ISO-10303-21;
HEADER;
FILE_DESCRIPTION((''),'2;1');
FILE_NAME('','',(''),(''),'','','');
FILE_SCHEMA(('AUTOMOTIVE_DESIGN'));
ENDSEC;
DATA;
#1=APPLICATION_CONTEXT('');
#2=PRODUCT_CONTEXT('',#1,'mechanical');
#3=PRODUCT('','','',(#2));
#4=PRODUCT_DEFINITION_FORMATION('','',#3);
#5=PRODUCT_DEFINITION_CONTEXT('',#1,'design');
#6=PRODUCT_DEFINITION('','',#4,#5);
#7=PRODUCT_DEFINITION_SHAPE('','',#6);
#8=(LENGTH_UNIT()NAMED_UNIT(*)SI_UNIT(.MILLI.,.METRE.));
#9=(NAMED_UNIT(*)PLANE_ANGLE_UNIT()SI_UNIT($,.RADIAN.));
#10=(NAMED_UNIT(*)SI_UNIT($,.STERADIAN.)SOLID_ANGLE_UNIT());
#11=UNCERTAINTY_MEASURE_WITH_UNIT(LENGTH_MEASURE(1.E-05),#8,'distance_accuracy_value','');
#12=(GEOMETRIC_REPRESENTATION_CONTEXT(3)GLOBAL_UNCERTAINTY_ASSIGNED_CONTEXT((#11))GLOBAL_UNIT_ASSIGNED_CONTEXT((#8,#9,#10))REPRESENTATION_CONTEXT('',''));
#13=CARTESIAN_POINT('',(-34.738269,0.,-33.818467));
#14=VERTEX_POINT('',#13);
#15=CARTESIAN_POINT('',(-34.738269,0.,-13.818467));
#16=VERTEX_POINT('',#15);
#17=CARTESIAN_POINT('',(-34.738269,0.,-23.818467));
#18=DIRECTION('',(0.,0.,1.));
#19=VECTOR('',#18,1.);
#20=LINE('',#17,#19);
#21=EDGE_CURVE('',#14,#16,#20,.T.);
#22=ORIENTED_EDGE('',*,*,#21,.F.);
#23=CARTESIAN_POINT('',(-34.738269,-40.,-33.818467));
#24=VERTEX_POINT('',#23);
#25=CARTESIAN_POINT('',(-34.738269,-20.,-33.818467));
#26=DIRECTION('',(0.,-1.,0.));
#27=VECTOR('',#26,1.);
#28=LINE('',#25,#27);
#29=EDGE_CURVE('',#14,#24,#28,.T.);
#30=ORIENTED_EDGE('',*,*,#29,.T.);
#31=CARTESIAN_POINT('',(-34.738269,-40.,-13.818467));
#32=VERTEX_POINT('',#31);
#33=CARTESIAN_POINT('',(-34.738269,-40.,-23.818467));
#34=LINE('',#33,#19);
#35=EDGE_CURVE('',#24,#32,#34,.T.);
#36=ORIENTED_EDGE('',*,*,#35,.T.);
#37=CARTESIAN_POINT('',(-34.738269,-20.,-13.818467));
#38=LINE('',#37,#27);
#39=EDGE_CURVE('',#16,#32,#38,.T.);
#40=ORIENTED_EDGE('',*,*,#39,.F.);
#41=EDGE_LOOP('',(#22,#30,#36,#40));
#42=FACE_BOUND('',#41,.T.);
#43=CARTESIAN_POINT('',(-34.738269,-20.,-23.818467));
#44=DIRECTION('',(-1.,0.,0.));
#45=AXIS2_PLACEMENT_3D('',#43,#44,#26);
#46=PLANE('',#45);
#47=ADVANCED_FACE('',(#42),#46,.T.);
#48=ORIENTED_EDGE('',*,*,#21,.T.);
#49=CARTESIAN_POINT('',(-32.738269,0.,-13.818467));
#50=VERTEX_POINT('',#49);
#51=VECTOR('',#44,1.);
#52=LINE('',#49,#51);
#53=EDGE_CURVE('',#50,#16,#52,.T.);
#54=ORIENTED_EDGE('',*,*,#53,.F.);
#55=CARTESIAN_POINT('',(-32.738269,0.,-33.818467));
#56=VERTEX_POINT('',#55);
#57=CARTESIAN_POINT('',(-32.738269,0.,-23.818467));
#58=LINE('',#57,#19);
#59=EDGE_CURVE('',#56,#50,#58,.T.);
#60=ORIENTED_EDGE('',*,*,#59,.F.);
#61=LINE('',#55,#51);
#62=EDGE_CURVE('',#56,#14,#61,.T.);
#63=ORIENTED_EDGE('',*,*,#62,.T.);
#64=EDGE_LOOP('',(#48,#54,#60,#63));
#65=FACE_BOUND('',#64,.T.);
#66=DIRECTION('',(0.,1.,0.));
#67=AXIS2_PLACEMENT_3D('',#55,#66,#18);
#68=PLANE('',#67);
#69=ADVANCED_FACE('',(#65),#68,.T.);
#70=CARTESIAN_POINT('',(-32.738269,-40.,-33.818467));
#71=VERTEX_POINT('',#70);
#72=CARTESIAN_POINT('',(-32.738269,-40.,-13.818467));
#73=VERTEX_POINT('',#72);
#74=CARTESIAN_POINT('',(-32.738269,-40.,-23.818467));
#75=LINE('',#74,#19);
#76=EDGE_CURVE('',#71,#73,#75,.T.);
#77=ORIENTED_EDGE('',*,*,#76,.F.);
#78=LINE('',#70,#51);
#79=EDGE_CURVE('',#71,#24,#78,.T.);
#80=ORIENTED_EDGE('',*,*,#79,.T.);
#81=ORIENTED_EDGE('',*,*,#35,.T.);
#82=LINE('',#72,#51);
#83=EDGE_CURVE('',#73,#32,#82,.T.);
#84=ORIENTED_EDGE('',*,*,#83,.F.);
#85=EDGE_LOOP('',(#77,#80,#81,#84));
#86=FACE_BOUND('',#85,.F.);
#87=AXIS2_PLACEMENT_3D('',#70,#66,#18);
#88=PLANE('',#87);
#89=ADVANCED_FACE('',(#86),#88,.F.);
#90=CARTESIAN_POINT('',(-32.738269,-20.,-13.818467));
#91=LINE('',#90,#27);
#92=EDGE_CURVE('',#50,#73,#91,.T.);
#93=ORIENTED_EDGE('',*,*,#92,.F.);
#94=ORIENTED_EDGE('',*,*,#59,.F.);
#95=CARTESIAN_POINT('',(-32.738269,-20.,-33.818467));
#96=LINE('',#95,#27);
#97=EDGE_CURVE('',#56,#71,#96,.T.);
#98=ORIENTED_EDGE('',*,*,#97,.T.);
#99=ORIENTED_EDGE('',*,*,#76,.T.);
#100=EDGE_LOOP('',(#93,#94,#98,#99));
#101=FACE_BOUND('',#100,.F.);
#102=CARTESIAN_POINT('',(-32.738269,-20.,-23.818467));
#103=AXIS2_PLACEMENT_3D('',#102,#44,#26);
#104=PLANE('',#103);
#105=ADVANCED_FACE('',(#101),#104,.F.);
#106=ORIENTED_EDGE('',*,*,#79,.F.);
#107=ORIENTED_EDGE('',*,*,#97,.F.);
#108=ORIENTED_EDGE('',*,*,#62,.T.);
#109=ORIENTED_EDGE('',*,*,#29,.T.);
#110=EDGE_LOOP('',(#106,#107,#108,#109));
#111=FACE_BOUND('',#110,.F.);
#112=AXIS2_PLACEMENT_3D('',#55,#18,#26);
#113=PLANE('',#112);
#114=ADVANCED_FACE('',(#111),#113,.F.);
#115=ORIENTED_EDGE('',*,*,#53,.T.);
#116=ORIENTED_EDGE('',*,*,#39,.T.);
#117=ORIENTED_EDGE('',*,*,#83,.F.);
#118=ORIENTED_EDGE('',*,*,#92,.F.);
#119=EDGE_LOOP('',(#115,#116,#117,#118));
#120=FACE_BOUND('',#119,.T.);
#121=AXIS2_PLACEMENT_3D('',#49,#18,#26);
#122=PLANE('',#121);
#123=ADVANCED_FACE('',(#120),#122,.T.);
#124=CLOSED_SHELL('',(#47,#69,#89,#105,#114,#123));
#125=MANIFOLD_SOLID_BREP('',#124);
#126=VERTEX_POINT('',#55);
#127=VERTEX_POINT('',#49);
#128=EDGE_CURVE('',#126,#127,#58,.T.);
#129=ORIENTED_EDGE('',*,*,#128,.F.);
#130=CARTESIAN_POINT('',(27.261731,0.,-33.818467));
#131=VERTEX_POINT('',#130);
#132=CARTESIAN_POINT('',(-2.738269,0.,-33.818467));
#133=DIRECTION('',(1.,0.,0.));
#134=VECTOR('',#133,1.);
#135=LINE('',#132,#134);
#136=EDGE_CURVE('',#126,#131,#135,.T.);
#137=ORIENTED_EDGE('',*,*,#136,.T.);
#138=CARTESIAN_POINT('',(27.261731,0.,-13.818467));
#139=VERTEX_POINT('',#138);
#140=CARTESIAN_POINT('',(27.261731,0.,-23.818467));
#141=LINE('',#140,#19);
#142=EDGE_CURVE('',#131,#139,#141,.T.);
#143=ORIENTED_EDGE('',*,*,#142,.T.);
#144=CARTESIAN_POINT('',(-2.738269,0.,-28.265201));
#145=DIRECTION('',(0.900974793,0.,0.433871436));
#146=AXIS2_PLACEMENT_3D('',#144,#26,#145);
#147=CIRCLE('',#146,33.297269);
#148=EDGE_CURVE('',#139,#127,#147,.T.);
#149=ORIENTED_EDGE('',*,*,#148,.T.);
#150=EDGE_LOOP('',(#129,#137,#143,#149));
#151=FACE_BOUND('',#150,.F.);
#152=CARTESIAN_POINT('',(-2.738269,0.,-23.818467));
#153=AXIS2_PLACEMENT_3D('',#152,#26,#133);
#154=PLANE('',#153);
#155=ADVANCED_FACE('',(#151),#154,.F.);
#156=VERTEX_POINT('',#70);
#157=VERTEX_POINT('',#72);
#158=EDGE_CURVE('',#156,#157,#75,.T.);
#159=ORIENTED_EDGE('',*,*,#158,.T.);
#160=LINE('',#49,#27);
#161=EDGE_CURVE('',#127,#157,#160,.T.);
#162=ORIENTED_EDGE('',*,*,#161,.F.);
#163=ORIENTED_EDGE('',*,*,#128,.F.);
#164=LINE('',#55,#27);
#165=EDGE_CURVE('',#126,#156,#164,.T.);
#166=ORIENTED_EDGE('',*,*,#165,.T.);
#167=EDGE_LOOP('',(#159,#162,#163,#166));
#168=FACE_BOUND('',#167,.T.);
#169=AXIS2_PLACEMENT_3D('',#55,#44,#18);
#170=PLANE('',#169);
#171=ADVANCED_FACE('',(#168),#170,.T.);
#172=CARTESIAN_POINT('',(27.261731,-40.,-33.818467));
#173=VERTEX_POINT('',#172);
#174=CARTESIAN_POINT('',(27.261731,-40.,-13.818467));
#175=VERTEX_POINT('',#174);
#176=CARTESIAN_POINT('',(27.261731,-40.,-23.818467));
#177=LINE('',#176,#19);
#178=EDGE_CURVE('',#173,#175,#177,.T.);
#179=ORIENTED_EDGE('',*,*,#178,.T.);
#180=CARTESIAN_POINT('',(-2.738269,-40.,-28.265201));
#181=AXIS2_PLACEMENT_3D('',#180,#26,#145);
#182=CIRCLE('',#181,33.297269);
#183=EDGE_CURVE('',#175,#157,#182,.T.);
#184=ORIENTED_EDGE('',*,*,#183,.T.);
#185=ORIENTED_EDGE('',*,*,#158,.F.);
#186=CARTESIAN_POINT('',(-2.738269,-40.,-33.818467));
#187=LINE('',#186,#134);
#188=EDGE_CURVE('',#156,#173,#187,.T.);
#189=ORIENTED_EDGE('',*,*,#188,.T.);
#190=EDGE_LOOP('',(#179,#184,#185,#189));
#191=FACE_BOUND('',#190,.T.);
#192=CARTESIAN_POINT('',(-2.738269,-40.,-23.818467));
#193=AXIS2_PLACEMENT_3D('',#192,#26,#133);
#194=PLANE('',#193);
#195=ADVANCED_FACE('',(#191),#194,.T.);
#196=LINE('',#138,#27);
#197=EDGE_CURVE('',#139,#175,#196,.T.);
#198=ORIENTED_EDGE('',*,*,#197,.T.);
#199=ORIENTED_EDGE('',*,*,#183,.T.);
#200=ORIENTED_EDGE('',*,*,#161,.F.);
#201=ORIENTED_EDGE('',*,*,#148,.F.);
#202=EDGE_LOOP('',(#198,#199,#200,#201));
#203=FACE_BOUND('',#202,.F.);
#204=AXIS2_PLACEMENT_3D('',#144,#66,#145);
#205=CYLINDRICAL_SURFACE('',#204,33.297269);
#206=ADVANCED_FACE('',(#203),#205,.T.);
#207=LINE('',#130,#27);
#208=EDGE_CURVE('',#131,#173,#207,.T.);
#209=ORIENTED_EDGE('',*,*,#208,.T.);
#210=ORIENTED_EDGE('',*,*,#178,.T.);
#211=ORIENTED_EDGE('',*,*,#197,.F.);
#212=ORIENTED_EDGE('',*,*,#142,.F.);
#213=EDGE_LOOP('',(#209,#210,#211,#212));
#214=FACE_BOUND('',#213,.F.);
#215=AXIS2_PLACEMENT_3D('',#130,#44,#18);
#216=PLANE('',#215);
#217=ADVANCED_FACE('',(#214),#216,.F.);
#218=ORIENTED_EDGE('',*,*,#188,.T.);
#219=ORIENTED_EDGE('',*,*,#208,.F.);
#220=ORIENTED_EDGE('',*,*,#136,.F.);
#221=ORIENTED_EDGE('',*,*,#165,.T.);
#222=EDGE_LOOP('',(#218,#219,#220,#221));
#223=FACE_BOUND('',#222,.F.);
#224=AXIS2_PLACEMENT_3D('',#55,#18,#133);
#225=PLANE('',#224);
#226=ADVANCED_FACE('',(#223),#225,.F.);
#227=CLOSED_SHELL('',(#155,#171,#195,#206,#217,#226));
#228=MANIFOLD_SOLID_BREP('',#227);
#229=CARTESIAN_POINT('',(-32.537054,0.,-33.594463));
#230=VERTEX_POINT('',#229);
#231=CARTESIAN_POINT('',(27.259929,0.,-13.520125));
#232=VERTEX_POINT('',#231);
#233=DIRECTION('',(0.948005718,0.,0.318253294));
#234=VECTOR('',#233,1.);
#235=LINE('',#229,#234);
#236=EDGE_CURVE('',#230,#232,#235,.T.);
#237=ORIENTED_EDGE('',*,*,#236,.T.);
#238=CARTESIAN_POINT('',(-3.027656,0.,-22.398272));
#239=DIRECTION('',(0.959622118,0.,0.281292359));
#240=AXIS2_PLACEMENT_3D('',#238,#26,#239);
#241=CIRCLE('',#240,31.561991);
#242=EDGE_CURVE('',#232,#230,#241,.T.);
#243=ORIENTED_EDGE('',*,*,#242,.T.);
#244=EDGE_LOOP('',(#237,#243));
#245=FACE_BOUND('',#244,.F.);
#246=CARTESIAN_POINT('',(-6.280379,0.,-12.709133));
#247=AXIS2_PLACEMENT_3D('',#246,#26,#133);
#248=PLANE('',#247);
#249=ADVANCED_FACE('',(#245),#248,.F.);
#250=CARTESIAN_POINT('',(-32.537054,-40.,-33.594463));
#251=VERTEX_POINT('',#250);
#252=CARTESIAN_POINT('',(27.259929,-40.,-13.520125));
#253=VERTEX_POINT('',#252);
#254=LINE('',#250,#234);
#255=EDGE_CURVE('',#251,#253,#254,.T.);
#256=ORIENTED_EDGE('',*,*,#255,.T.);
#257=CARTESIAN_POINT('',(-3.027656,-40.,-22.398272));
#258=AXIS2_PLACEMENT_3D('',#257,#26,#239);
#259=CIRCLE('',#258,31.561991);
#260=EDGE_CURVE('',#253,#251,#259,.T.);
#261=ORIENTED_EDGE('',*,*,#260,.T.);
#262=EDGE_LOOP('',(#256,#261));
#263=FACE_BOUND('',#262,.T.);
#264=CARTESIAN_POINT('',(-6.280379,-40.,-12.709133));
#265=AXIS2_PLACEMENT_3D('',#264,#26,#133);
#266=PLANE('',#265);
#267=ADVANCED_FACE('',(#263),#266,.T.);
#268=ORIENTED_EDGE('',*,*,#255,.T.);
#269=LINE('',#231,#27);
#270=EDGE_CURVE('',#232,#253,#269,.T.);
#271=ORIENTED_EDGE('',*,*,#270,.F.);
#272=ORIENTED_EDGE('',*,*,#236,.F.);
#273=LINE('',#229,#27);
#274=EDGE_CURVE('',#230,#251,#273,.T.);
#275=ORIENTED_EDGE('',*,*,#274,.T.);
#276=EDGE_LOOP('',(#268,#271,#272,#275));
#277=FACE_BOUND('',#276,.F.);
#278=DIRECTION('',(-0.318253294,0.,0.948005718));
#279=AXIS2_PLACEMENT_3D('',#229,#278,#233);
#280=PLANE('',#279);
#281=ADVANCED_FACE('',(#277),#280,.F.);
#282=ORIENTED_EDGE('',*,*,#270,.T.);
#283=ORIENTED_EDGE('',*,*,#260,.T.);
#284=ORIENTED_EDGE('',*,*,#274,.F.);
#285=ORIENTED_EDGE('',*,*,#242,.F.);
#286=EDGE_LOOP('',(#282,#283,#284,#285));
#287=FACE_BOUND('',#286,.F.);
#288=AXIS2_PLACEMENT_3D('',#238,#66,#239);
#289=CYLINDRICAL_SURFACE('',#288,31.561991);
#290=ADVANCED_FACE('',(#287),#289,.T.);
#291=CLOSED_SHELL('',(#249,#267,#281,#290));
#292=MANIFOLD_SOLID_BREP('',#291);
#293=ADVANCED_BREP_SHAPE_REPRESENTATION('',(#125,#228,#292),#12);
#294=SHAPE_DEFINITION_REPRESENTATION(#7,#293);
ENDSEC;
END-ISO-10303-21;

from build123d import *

# Parameters (mm, degrees)
F0_W     = 60
F0_H     = 20
F1_DEPTH = 40
F3_DEPTH = 40
F4_W     = 40
F4_H     = 20
F5_DEPTH = 2


# Not quite as in the source:
# - a feature names something its author has since deleted; it is built from what else it names


with BuildPart() as f1:
    # F0 (on Front) → F1 (new body)
    with BuildSketch(Plane.XZ):
        with Locations((-2.7382690459, -23.8184666568)):
            Rectangle(F0_W, F0_H)
        with BuildLine():
            ThreePointArc((27.2617309541, -13.8184666568), (-2.7382690459, 5.032068405), (-32.7382690459, -13.8184666568))
            Line((-32.7382690459, -13.8184666568), (27.2617309541, -13.8184666568))
        make_face()
    extrude(amount=F1_DEPTH)


with BuildPart() as f3:
    # F2 (on Front) → F3 (new body)
    with BuildSketch(Plane.XZ):
        with BuildLine():
            Line((-32.5370542705, -33.5944630206), (27.2599291056, -13.5201252997))
            ThreePointArc((27.2599291056, -13.5201252997), (-13.0723634113, 7.5226758687), (-32.5370542705, -33.5944630206))
        make_face()
    extrude(amount=F3_DEPTH)


with BuildPart() as f5:
    # F4 (on face) → F5 (new body)
    with BuildSketch(Plane(origin=(-32.7382690459, 0, 0), x_dir=(0, -1, 0), z_dir=(-1, 0, 0))):
        with Locations((20, -23.8184666568)):
            Rectangle(F4_W, F4_H)
    extrude(amount=F5_DEPTH)


solid = Compound([f1.part, f3.part, f5.part])
